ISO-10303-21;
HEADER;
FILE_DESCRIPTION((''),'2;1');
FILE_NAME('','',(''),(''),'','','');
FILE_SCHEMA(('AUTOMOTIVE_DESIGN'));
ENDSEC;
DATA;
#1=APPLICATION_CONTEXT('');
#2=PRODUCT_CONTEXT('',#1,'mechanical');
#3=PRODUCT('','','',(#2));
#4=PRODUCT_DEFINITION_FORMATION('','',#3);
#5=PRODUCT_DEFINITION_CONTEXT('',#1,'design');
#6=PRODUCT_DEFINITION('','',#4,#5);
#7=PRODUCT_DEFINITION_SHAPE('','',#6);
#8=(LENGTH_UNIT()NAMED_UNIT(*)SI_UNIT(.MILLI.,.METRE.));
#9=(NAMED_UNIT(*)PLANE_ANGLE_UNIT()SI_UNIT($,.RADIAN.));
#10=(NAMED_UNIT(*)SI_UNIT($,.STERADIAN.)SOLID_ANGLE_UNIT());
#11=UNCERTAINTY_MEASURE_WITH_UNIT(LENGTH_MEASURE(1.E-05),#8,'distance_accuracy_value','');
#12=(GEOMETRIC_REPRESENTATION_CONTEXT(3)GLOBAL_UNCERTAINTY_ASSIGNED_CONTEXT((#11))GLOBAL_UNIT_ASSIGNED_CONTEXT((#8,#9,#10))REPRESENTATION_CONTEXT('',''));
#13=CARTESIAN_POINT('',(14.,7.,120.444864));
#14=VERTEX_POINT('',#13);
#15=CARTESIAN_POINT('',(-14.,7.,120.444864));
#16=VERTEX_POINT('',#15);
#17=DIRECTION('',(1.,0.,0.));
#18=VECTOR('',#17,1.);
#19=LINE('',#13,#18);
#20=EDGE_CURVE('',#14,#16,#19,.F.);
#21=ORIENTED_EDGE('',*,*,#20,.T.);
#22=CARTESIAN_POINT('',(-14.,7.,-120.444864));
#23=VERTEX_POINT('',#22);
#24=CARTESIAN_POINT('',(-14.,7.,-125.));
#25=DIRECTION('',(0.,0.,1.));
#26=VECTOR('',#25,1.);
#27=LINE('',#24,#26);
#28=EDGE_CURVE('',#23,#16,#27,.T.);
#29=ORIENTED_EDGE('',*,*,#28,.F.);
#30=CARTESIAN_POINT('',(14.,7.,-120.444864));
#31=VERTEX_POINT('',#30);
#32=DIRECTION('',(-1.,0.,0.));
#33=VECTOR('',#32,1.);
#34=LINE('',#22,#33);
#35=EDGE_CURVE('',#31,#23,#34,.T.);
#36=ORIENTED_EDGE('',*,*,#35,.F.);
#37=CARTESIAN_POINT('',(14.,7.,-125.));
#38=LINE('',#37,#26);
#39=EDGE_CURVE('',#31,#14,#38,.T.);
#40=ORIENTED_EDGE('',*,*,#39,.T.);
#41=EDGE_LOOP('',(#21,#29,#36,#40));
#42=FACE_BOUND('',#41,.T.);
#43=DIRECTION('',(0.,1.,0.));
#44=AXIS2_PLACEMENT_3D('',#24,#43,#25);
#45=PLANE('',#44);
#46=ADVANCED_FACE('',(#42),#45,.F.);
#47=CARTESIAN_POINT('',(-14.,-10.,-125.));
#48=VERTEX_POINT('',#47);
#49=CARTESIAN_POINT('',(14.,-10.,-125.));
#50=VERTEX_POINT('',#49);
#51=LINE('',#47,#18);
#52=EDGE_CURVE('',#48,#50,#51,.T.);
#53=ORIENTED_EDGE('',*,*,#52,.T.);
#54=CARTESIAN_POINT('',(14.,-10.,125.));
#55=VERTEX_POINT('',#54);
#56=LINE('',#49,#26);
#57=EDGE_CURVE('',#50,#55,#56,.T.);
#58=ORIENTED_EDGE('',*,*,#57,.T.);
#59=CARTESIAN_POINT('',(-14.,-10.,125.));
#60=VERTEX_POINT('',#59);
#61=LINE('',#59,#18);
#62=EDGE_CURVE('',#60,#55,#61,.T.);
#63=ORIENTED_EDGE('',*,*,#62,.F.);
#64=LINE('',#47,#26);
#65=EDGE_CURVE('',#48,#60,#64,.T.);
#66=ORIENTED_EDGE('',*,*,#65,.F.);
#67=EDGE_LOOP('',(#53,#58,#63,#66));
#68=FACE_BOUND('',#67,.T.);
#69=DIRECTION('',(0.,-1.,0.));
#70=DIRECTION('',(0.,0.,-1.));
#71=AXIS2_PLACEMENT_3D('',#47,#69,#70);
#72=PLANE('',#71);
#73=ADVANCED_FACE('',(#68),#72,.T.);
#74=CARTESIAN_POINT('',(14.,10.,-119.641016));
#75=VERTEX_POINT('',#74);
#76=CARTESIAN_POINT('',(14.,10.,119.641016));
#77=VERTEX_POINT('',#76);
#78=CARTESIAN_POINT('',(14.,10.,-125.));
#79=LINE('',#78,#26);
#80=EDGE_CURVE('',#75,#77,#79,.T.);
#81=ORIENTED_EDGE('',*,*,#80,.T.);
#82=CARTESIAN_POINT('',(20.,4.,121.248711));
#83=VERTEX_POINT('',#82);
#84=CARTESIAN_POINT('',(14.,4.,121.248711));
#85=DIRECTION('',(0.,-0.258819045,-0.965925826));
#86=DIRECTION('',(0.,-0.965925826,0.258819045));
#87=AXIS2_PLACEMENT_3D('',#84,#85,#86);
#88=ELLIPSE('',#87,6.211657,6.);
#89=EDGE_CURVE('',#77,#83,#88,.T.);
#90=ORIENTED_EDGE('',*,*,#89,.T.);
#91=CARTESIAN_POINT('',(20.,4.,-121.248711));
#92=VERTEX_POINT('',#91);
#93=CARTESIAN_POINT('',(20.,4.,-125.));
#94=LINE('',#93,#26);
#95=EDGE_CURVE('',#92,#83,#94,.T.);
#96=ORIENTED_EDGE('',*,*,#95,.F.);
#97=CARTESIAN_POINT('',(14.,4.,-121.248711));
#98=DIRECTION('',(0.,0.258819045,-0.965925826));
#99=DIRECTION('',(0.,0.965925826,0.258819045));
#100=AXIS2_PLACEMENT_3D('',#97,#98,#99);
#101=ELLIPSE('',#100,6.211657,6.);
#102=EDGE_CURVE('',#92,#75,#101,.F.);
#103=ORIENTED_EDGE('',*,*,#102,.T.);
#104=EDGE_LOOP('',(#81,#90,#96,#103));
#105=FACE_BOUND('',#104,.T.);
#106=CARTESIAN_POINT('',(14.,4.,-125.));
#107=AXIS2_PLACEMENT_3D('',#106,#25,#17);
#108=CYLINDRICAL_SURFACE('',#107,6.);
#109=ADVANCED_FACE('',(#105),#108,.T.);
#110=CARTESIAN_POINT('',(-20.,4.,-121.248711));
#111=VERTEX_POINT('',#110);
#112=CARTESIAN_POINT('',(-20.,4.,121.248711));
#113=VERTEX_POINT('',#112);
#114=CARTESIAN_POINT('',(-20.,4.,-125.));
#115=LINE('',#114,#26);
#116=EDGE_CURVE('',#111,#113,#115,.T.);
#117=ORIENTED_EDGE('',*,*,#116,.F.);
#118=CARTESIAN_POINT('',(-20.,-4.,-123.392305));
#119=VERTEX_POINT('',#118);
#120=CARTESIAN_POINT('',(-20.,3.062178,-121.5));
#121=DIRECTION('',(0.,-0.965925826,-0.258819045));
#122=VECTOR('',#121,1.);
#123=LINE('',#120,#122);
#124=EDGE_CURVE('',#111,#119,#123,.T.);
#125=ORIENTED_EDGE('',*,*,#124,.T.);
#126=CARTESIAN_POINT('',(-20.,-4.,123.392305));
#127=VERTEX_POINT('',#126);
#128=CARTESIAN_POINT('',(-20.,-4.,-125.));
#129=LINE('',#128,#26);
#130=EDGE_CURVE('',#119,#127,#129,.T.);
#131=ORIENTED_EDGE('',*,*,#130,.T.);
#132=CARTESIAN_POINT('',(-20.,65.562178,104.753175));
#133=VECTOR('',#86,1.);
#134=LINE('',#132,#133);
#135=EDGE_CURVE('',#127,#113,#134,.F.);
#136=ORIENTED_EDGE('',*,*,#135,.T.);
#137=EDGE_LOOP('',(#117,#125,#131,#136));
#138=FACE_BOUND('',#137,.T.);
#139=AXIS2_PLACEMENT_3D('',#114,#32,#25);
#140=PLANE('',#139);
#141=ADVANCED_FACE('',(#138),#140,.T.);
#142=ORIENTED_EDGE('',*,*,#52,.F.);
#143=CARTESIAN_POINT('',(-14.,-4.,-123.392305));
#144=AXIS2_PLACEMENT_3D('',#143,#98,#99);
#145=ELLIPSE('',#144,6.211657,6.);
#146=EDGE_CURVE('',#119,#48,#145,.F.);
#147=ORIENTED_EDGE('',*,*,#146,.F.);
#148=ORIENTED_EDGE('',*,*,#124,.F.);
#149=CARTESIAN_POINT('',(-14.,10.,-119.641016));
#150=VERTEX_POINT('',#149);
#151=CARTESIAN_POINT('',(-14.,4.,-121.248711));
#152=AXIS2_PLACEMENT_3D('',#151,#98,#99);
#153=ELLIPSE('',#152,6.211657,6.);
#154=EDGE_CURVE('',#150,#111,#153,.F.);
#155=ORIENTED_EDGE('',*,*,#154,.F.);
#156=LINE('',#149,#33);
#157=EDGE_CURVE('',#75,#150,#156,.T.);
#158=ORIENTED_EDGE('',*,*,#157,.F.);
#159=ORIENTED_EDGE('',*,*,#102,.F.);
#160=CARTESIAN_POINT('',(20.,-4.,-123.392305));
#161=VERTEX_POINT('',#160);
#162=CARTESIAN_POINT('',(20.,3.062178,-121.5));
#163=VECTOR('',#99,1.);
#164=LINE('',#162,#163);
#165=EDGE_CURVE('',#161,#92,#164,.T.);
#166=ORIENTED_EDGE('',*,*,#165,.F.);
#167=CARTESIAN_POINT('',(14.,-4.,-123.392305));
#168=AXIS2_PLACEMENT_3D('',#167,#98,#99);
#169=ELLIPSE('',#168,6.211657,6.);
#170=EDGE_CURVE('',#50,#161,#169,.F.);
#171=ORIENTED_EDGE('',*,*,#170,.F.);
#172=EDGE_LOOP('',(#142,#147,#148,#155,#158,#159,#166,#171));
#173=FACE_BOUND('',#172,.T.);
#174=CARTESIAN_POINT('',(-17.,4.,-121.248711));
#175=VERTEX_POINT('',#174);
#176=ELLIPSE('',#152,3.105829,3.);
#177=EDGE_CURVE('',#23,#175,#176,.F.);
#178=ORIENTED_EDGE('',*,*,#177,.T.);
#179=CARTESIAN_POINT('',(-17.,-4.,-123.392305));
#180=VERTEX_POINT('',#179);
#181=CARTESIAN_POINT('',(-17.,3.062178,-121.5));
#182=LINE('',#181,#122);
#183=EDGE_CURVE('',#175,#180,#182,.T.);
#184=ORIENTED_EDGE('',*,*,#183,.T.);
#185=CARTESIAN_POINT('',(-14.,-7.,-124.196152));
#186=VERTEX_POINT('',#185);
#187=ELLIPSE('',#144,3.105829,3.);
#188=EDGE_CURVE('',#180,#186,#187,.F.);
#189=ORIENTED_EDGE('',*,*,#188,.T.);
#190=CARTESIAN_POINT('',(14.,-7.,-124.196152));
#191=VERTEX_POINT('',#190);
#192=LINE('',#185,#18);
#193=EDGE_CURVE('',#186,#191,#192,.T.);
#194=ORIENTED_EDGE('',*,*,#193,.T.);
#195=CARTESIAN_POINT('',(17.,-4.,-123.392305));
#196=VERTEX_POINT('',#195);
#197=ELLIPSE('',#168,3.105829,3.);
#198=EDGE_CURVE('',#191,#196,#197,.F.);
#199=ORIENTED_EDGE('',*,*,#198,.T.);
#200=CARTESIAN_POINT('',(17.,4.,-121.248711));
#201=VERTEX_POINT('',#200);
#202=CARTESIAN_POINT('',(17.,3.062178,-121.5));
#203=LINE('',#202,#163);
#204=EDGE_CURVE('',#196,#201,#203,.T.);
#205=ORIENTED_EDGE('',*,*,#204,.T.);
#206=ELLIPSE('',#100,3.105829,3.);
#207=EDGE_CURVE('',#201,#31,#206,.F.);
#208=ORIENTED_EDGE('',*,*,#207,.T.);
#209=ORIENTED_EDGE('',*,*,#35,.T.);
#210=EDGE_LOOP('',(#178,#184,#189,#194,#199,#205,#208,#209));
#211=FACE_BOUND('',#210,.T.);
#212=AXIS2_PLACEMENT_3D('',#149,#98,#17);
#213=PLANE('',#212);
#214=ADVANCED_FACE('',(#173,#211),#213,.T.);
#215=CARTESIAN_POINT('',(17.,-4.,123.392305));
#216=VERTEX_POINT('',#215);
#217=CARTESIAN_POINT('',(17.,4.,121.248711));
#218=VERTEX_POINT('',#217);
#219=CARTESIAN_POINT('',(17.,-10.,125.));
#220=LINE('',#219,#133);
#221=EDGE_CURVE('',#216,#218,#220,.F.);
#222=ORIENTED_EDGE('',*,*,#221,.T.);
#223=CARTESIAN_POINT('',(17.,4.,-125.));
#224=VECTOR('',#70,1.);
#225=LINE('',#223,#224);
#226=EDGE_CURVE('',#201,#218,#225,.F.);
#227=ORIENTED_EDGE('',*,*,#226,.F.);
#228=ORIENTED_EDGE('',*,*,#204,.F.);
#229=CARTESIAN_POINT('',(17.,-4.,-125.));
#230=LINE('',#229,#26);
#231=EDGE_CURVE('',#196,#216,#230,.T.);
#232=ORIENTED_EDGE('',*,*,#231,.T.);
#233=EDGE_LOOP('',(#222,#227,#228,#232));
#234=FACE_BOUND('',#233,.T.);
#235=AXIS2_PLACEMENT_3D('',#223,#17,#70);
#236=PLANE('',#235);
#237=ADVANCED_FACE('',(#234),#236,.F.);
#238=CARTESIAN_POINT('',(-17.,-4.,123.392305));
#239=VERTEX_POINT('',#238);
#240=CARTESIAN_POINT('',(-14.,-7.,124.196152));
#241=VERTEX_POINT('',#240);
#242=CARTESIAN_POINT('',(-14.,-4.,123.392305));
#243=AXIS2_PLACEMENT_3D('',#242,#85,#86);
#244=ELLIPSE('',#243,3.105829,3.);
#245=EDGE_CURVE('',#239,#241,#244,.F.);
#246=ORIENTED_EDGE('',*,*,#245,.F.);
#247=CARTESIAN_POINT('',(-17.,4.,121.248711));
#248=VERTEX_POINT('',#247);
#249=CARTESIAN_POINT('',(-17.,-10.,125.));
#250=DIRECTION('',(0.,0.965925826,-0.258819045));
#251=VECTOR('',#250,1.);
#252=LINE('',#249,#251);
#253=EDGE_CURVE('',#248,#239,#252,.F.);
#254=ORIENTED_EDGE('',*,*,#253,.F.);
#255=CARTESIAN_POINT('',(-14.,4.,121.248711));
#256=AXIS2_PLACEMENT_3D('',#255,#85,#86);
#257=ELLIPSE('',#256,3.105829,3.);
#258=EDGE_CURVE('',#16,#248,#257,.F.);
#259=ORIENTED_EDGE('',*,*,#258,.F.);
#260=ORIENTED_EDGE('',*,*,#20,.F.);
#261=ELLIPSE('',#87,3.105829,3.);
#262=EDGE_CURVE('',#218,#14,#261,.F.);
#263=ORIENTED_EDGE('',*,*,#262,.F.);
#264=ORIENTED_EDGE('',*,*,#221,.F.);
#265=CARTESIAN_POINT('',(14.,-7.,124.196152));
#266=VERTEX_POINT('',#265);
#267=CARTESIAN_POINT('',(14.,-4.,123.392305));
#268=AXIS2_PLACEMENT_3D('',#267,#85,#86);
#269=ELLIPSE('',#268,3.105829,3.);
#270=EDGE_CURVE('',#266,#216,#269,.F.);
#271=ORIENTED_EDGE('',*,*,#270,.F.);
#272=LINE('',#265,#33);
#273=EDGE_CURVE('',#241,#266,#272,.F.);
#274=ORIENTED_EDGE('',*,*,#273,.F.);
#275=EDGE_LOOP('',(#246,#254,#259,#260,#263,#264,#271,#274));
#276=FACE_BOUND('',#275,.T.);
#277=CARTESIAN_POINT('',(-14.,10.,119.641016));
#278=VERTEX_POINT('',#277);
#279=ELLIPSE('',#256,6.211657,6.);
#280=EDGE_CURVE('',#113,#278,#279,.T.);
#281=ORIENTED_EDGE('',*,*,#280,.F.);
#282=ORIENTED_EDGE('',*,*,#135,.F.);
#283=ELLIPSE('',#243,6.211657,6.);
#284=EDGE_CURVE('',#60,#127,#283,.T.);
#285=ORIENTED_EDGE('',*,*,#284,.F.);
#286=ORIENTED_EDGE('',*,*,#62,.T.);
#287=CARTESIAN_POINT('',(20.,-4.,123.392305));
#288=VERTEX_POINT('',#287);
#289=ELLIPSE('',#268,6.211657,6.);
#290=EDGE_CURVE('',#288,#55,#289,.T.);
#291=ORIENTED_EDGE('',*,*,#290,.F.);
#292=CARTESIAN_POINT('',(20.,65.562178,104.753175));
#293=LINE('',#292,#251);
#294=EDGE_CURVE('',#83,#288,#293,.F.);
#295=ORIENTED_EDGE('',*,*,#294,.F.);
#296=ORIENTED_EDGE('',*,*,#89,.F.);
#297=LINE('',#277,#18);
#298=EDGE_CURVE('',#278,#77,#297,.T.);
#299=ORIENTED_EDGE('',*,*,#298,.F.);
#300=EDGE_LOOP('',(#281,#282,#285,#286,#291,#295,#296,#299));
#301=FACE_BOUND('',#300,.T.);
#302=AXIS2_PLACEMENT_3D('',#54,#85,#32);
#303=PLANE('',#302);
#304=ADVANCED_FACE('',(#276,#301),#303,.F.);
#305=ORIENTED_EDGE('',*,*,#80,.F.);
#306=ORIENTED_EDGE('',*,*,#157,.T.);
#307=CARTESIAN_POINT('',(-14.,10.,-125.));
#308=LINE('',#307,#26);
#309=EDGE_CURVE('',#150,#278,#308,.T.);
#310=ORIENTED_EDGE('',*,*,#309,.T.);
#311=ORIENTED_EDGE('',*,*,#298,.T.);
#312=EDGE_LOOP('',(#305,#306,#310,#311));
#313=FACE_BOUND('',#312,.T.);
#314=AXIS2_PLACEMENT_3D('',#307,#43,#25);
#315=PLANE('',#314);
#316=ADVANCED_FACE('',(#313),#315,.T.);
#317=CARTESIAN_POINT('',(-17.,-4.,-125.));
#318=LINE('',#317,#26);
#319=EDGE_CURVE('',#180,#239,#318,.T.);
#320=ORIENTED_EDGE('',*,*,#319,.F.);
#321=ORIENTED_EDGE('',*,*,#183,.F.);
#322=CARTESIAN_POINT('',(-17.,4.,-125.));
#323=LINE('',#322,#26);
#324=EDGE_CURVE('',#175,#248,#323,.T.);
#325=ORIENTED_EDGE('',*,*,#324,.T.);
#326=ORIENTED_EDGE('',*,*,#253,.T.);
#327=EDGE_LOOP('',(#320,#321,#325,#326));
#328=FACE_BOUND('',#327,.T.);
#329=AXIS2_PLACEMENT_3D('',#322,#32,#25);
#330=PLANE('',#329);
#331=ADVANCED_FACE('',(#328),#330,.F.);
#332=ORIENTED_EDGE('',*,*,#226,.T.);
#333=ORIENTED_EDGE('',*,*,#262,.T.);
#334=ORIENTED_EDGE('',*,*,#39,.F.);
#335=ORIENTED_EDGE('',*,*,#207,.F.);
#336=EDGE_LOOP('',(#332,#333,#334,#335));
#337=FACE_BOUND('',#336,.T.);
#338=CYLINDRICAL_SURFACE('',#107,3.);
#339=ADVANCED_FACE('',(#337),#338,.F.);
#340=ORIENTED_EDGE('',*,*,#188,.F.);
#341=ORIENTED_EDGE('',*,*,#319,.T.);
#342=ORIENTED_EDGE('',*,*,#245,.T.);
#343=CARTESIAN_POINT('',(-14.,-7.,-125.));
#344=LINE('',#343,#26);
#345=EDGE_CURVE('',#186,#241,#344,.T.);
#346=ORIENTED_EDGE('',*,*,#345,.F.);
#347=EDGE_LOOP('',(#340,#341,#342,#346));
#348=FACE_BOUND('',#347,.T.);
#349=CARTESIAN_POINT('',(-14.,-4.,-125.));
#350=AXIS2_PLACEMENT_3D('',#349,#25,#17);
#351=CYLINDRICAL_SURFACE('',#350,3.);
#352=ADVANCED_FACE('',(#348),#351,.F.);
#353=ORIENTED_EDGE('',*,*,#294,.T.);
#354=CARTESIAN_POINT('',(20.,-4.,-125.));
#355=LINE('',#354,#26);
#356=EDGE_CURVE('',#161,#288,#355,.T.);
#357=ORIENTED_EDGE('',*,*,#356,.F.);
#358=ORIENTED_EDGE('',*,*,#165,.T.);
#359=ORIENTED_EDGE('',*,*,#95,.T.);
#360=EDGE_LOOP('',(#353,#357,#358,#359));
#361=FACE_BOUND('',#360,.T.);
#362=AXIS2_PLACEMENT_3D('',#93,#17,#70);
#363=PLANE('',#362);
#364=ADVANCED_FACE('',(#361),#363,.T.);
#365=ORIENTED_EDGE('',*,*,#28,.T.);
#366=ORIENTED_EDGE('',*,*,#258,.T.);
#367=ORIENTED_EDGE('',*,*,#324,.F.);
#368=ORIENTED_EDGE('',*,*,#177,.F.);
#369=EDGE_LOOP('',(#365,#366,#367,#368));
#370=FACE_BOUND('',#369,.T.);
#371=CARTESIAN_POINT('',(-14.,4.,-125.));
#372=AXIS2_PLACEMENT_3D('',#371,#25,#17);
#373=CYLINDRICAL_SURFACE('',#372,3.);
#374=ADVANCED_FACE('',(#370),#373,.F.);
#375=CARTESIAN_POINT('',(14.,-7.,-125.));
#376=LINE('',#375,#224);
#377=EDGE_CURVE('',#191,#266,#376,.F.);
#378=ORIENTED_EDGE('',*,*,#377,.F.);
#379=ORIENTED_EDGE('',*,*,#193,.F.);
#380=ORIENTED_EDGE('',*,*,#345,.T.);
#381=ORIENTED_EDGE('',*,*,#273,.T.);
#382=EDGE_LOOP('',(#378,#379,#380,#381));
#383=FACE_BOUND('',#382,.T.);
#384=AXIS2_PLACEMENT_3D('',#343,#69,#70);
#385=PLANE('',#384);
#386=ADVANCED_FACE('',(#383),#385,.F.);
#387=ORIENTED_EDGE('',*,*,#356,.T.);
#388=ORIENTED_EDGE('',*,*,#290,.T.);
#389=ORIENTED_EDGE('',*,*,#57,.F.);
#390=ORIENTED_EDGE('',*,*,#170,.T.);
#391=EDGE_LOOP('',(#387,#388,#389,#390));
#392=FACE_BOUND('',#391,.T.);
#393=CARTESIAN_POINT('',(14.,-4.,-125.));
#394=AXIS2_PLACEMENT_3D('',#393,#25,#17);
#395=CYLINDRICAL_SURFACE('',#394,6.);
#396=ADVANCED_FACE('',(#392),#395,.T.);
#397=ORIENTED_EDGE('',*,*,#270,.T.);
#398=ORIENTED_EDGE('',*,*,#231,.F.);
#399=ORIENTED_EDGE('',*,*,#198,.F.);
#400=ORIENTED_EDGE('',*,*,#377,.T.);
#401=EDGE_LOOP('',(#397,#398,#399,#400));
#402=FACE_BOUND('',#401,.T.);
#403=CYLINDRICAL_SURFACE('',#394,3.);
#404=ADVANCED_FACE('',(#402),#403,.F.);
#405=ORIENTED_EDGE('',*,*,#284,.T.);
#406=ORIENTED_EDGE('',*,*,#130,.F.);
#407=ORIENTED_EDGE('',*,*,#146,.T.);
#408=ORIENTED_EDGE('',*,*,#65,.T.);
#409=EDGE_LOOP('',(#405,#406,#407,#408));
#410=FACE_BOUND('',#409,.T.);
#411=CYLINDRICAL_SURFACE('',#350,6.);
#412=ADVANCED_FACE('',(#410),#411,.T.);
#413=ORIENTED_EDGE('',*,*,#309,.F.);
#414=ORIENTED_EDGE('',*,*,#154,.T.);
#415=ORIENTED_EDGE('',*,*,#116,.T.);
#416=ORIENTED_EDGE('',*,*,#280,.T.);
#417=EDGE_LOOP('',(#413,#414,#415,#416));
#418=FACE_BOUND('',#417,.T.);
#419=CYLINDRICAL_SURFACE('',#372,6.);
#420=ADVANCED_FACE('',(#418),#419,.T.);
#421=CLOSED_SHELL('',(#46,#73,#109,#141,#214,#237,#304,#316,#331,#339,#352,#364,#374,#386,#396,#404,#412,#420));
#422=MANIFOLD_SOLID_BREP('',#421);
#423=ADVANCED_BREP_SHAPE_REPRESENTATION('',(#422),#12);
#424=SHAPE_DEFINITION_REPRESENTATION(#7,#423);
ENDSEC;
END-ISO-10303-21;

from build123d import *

# Parameters (mm, degrees)
EXTRUDE_1_DEPTH      = 125
EXTRUDE_1_DEPTH_BACK = 125
SHELL_1_T            = -3
CHAMFER_1_SIZE       = 5.358983849
CHAMFER_1_SIZE_2     = 20


with BuildPart() as part:
    # Эскиз1 → Бобышка-Вытянуть1 (new, two sides: drawn at the far end of the back side and taken through both)
    with BuildSketch(Plane.XY.offset(-EXTRUDE_1_DEPTH_BACK)):
        with BuildLine():
            Line((-14, 10), (14, 10))
            ThreePointArc((14, 10), (18.242640687, 8.242640687), (20, 4))
            Line((20, 4), (20, -4))
            ThreePointArc((20, -4), (18.242640687, -8.242640687), (14, -10))
            Line((14, -10), (-14, -10))
            ThreePointArc((-14, -10), (-18.242640687, -8.242640687), (-20, -4))
            Line((-20, -4), (-20, 4))
            ThreePointArc((-20, 4), (-18.242640687, 8.242640687), (-14, 10))
        make_face()
    extrude(amount=EXTRUDE_1_DEPTH + EXTRUDE_1_DEPTH_BACK)

    # Оболочка1
    shell_1_openings = [part.faces().sort_by_distance(p)[0] for p in [
        (0, 0, -125),
        (0, 0, 125),
    ]]
    offset(amount=SHELL_1_T, openings=shell_1_openings, kind=Kind.INTERSECTION)

    # Фаска1
    # the kernel refuses this chamfer: 20, 5.358983849 mm, written as the material it takes off along each edge
    with BuildSketch(Plane(origin=(-65.934431404, 10, -125), x_dir=(0, 0.13751244702128945, 0.9905000388259543), z_dir=(1, 0, 0))) as chamfer_1_piece_1:
        Polygon((CHAMFER_1_SIZE * 0.990500038756, CHAMFER_1_SIZE * 0.137512447012), (-CHAMFER_1_SIZE_2 * 0.137512447021, CHAMFER_1_SIZE_2 * 0.990500038826), (0, 0), align=None)
    extrude(amount=131.868862808, mode=Mode.SUBTRACT)
    with BuildSketch(Plane(origin=(-65.934431404, 10, 125), x_dir=(0, 0.13751244702128945, -0.9905000388259543), z_dir=(1, 0, 0))) as chamfer_1_piece_2:
        Polygon((CHAMFER_1_SIZE * 0.990500038756, -CHAMFER_1_SIZE * 0.137512447012), (-CHAMFER_1_SIZE_2 * 0.137512447021, -CHAMFER_1_SIZE_2 * 0.990500038826), (0, 0), align=None)
    extrude(amount=131.868862808, mode=Mode.SUBTRACT)


solid = part.part
